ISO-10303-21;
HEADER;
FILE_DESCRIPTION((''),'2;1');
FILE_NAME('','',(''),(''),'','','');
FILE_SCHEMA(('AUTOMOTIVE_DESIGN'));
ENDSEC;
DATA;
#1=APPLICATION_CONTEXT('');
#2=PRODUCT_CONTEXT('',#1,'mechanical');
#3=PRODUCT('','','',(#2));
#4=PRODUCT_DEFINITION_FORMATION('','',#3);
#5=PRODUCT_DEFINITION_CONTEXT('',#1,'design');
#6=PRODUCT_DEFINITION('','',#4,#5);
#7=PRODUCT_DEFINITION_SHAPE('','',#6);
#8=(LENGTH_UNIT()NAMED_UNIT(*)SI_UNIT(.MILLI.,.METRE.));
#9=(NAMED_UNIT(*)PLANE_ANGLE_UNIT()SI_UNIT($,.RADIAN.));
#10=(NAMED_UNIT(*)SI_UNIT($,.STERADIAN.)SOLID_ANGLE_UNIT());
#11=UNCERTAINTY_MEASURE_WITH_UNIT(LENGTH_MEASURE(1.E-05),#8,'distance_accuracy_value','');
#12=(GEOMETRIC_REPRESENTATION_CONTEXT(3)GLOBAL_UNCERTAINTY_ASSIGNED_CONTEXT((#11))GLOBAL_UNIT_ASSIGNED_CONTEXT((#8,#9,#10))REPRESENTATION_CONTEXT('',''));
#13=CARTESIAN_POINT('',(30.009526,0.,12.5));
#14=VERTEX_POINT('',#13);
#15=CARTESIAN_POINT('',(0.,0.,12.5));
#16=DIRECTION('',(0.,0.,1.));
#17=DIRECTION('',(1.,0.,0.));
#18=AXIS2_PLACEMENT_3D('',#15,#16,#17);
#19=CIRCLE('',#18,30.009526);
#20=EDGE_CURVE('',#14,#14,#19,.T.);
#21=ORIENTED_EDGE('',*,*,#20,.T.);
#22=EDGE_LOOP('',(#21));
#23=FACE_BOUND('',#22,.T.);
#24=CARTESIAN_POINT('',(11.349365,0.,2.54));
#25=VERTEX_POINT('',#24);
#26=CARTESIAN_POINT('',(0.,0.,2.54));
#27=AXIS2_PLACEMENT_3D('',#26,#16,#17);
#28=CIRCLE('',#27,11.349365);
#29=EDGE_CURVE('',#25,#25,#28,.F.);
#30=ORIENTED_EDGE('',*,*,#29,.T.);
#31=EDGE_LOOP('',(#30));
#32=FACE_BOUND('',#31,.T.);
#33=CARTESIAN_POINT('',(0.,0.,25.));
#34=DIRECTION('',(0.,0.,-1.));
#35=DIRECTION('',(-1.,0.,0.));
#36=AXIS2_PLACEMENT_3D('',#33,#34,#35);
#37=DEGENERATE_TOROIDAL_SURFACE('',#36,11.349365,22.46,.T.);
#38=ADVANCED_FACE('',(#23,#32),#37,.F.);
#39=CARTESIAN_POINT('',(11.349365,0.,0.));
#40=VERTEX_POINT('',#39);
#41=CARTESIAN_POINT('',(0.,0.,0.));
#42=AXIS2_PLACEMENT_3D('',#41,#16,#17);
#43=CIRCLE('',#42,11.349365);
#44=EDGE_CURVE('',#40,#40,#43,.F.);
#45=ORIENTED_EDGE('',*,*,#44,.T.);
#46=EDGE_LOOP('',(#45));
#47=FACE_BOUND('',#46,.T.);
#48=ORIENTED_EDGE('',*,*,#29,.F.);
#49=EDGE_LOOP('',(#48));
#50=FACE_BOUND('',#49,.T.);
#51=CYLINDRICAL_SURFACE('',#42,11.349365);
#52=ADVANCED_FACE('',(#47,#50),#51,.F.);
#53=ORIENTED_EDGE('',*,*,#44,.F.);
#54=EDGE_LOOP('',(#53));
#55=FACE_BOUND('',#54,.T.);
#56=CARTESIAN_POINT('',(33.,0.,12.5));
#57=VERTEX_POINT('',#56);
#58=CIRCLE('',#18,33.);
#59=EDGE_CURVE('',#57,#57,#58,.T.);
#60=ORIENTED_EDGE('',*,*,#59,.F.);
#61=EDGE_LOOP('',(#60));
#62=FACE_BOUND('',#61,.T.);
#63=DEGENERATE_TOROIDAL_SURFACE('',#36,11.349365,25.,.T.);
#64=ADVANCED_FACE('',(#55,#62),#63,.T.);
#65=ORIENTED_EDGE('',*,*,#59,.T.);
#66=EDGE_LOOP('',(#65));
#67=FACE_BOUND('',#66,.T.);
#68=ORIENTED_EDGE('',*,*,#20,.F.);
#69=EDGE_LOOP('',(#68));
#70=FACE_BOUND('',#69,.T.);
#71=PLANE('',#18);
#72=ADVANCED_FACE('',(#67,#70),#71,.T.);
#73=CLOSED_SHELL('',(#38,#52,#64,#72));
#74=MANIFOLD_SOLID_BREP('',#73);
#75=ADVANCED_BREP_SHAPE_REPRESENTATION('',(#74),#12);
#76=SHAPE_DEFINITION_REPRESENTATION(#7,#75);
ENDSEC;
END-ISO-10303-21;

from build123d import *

# Parameters (mm, degrees)
SKETCH1_R           = 33
BOSS_EXTRUDE1_DEPTH = 12.5
FILLET1_R           = 25


# Read off the part's stored shape, not the designer's step: Shell1
with BuildPart() as part:
    # Sketch1 → Boss-Extrude1 (new body)
    with BuildSketch(Plane.XY):
        Circle(SKETCH1_R)
    extrude(amount=BOSS_EXTRUDE1_DEPTH)

    # Fillet1
    # the kernel refuses this fillet: 25 mm, written as the material it takes off along each edge
    with BuildSketch(Plane(origin=(0, 0, 0), x_dir=(1, 0, 0), z_dir=(0, -1, 0))) as fillet1_piece_1:
        with BuildLine():
            CenterArc((11.349364905, 25), FILLET1_R, 270, 60)
            Line((11.349364905, 0), (11.349364905, -0.5))
            Line((11.349364905, -0.5), (33, -0.5))
            Line((33, -0.5), (33.5, 0))
            ThreePointArc((33.5, 0), (33.5, 6.25), (33.433012702, 12.25))
            Line((33.433012702, 12.25), (33, 12.5))
        make_face()
    revolve(axis=Axis((0, 0, 0), (0, 0, 1)), mode=Mode.SUBTRACT)

    # Shell1 outline → Shell1 (revolve, cut)
    with BuildSketch(Plane.XZ):
        with BuildLine():
            Line((0, 0), (11.349364905, 0))
            Line((11.349364905, 0), (11.349364905, 2.54))
            ThreePointArc((11.349364905, 2.54), (21.925318763, 5.185843445), (30.009525676, 12.5))
            Line((30.009525676, 12.5), (0, 12.5))
            Line((0, 12.5), (0, 0))
        make_face()
    revolve(axis=Axis((0, 0, 0), (0, 0, 1)), mode=Mode.SUBTRACT)


solid = part.part
